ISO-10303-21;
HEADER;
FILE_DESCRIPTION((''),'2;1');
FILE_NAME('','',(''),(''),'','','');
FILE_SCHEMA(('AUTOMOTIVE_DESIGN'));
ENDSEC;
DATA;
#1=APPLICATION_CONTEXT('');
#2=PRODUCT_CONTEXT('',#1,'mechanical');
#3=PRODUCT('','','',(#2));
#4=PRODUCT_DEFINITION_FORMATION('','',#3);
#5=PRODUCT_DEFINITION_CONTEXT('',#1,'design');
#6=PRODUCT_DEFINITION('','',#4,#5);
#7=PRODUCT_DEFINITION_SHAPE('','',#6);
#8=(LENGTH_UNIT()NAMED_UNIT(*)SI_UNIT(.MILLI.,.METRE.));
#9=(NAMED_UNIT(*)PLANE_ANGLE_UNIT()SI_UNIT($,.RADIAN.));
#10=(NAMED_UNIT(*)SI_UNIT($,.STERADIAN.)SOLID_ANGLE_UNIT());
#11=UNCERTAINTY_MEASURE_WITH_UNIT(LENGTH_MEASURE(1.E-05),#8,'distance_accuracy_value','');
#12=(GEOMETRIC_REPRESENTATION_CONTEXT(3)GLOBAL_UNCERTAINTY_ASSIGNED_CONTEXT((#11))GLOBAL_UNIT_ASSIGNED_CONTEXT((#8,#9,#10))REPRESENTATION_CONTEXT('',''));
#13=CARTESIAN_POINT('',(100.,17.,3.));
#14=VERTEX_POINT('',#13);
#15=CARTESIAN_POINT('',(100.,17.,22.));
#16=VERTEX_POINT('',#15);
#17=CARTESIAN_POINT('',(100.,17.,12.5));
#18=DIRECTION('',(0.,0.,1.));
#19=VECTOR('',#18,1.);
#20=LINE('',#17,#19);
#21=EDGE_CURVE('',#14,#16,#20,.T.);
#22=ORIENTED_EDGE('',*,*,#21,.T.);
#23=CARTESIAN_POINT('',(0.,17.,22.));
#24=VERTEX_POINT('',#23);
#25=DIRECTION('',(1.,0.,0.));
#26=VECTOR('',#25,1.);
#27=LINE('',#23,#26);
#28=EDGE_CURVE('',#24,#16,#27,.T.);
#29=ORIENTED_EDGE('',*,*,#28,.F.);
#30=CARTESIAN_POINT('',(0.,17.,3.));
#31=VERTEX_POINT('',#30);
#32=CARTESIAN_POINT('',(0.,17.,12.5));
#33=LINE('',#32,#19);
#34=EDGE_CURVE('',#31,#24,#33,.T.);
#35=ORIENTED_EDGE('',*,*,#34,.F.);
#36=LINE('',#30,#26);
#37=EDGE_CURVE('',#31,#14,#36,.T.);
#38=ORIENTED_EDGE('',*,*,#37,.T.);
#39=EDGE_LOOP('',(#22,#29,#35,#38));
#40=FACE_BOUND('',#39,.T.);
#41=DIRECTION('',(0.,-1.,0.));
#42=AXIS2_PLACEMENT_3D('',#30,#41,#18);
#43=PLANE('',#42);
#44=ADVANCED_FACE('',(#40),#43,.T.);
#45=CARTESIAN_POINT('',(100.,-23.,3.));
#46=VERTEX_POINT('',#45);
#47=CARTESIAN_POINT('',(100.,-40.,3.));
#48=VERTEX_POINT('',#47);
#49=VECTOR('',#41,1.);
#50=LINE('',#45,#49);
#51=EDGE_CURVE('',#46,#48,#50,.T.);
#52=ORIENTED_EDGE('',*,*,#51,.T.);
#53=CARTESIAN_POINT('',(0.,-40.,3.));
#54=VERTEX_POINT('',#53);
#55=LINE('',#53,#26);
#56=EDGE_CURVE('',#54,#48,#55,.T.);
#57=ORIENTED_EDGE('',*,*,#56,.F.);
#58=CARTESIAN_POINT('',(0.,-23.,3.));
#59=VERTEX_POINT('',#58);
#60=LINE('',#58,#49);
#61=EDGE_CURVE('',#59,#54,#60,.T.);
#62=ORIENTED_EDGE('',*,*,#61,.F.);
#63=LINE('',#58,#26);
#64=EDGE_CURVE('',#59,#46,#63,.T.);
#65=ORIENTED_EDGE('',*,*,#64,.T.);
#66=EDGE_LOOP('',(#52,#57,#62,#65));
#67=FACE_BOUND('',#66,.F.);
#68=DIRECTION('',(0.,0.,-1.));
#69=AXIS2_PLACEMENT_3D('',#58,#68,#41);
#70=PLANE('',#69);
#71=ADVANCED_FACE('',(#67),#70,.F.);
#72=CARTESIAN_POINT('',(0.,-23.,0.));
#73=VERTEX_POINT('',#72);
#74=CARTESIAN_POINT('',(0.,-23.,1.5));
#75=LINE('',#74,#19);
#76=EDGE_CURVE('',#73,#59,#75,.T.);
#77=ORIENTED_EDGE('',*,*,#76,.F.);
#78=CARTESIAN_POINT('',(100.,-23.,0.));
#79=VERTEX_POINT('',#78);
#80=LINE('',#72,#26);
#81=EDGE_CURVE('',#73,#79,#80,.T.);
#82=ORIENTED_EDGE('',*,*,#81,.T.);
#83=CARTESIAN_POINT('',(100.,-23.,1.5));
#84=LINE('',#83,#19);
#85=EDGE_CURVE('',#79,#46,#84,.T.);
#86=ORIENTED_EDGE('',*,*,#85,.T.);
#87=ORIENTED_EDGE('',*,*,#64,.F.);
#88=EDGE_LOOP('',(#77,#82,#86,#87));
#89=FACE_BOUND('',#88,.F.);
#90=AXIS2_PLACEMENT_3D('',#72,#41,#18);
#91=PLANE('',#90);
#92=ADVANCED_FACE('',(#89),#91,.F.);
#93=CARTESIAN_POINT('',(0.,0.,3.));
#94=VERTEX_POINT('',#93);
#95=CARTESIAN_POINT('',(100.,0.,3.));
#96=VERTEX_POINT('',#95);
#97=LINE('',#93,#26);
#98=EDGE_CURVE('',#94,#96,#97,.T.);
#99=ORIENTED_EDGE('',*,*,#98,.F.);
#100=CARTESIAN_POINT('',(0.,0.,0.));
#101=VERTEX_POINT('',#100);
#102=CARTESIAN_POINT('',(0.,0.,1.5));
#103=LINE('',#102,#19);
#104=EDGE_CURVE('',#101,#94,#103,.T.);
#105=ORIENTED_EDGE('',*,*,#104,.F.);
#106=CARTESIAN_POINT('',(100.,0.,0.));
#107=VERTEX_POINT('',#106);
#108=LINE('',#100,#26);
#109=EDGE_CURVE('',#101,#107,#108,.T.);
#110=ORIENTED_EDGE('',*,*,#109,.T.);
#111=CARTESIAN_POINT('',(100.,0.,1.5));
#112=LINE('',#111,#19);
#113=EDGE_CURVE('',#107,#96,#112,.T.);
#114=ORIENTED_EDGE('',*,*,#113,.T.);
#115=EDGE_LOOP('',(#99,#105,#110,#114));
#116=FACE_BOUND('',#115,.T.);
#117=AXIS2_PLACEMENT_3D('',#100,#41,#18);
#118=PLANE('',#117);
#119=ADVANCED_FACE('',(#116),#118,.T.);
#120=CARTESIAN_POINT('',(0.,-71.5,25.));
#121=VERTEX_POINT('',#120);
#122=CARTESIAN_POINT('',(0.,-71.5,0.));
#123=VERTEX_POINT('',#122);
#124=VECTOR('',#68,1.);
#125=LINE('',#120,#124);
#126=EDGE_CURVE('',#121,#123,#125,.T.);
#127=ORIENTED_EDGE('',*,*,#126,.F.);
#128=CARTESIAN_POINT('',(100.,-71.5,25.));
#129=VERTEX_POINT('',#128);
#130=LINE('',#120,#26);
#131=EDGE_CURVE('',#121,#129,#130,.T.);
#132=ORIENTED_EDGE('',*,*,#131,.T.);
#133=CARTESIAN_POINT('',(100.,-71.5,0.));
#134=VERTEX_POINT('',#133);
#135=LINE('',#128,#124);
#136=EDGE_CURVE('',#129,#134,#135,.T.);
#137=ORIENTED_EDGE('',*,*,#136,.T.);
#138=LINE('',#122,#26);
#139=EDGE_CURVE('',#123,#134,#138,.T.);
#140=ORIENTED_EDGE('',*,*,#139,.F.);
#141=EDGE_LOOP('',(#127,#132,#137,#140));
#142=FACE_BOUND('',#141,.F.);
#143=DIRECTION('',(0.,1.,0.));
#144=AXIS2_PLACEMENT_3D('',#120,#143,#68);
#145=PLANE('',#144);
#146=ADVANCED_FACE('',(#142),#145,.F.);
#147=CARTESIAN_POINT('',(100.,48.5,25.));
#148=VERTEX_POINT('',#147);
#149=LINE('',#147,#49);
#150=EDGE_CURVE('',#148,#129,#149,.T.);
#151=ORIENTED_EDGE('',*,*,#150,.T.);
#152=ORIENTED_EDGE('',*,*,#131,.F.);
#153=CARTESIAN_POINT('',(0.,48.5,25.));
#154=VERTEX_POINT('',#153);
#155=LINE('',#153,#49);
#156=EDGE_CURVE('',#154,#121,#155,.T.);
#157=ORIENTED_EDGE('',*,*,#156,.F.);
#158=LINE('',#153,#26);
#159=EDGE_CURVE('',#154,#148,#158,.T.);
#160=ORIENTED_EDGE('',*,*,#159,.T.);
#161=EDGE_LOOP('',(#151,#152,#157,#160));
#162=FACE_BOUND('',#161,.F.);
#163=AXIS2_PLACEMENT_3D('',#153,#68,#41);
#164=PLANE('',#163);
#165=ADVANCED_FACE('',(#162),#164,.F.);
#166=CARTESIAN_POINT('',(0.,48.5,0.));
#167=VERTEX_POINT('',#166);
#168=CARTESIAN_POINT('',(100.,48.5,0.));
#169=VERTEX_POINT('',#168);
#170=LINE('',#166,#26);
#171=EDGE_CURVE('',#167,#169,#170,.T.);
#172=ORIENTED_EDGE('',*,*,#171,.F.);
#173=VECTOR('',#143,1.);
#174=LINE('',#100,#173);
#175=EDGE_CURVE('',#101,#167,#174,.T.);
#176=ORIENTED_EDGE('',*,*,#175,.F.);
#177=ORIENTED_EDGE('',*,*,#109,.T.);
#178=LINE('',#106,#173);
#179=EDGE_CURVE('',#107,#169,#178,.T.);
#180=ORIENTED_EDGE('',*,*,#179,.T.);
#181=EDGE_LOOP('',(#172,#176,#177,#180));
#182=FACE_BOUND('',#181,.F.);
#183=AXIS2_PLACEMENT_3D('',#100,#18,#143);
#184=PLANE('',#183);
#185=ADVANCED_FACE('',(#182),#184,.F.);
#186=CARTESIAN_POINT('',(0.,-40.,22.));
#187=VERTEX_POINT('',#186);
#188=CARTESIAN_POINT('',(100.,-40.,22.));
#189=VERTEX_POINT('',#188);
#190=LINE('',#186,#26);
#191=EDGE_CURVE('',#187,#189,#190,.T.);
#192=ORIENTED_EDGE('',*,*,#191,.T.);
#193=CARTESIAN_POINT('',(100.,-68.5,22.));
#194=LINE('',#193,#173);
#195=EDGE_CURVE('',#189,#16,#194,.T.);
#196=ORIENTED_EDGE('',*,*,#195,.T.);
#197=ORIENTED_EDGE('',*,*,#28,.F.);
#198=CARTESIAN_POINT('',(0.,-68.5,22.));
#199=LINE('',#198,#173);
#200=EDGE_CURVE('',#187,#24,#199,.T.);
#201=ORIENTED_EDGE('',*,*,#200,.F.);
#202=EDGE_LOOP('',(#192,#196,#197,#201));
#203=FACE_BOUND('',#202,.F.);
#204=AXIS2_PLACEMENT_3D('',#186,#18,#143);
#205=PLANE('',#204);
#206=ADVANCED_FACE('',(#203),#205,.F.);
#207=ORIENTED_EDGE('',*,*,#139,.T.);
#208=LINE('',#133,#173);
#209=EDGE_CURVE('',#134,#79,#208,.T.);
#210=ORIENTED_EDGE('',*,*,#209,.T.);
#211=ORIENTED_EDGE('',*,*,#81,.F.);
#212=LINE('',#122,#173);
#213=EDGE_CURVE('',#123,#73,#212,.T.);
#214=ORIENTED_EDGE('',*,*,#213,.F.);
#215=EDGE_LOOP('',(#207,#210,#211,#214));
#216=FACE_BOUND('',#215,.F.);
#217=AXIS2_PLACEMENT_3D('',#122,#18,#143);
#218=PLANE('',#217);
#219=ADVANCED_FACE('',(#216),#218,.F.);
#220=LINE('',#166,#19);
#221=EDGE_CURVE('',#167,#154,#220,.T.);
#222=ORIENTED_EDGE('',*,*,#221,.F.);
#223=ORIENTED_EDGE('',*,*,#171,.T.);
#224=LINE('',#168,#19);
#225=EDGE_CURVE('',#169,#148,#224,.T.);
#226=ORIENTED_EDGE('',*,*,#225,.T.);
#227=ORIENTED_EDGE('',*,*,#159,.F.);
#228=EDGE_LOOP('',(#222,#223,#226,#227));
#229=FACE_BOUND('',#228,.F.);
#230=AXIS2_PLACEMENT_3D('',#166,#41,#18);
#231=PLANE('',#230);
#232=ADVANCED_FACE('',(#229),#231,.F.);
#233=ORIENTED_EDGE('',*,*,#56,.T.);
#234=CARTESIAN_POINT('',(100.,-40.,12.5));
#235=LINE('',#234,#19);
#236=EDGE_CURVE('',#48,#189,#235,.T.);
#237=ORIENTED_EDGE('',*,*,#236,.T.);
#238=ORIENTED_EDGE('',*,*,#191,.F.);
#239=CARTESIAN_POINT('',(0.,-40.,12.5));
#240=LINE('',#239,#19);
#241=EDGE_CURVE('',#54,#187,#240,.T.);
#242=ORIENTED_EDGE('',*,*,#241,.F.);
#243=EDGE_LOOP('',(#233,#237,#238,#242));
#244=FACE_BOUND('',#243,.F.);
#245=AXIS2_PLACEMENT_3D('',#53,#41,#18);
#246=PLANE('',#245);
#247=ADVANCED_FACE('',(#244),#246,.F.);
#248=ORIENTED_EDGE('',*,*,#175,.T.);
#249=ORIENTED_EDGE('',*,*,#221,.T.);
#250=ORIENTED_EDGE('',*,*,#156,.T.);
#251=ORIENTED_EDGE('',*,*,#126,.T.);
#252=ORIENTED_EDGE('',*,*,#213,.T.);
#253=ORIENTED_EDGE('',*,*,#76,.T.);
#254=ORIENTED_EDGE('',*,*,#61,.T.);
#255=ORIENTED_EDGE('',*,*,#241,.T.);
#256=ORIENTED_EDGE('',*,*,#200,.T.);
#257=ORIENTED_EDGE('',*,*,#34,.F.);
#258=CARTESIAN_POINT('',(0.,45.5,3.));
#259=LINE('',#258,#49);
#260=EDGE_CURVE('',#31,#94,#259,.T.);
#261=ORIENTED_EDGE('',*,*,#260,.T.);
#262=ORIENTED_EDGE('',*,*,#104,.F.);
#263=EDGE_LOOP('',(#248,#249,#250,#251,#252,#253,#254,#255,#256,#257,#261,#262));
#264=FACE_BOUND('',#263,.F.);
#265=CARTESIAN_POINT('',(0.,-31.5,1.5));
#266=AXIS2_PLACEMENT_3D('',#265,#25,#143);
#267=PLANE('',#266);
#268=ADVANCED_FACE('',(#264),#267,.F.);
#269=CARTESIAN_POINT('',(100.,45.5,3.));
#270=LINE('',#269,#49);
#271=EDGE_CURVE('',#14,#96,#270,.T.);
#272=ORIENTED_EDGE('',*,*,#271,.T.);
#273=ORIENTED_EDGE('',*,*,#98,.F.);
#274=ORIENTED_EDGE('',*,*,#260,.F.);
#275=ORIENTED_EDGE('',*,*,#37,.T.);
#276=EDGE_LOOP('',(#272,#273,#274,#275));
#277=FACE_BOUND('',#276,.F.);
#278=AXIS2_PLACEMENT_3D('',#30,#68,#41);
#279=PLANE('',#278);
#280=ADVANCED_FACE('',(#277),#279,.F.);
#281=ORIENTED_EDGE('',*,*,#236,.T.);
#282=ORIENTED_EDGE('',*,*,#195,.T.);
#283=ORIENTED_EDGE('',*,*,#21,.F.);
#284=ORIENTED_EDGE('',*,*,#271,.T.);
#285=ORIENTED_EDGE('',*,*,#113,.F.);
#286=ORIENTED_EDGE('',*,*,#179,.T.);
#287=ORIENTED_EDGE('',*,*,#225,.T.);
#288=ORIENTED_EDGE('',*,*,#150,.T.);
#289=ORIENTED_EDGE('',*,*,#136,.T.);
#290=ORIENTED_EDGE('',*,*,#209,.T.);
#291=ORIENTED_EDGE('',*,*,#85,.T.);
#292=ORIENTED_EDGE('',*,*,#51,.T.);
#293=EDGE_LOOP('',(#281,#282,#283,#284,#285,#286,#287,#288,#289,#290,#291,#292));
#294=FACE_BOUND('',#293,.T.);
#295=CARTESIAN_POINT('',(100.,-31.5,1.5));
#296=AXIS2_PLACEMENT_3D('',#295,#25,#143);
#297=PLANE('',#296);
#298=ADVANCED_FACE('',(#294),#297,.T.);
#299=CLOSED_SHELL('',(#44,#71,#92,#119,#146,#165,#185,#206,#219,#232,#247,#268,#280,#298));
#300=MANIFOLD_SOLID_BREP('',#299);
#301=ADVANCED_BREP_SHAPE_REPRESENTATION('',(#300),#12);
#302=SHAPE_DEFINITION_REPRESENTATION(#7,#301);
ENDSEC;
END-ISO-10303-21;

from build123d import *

# Parameters (mm, degrees)
F0_W     = 17
F0_H     = 3
F0_W_2   = 57
F0_W_3   = 28.5
F0_H_2   = 19
F1_DEPTH = 100


# Not quite as in the source:
# - a feature of the source that left no trace in its solid (it failed there, or was rolled back) is left out


with BuildPart() as f1:
    # F0 (on Right) → F1 (new body)
    with BuildSketch(Plane.YZ):
        with Locations((-31.5, 1.5)):
            Rectangle(F0_W, F0_H)
        Polygon((-68.5, 22), (-40, 22), (-40, 25), (-71.5, 25), (-71.5, 0), (-40, 0), (-40, 3), (-68.5, 3), align=None)
        with Locations((-11.5, 23.5)):
            Rectangle(F0_W_2, F0_H)
        Polygon((17, 3), (17, 0), (48.5, 0), (48.5, 25), (17, 25), (17, 22), (45.5, 22), (45.5, 3), align=None)
        with Locations((8.5, 1.5)):
            Rectangle(F0_W, F0_H)
        with Locations((31.25, 12.5)):
            Rectangle(F0_W_3, F0_H_2)
        with Locations((-54.25, 12.5)):
            Rectangle(F0_W_3, F0_H_2)
    extrude(amount=F1_DEPTH)


solid = f1.part
